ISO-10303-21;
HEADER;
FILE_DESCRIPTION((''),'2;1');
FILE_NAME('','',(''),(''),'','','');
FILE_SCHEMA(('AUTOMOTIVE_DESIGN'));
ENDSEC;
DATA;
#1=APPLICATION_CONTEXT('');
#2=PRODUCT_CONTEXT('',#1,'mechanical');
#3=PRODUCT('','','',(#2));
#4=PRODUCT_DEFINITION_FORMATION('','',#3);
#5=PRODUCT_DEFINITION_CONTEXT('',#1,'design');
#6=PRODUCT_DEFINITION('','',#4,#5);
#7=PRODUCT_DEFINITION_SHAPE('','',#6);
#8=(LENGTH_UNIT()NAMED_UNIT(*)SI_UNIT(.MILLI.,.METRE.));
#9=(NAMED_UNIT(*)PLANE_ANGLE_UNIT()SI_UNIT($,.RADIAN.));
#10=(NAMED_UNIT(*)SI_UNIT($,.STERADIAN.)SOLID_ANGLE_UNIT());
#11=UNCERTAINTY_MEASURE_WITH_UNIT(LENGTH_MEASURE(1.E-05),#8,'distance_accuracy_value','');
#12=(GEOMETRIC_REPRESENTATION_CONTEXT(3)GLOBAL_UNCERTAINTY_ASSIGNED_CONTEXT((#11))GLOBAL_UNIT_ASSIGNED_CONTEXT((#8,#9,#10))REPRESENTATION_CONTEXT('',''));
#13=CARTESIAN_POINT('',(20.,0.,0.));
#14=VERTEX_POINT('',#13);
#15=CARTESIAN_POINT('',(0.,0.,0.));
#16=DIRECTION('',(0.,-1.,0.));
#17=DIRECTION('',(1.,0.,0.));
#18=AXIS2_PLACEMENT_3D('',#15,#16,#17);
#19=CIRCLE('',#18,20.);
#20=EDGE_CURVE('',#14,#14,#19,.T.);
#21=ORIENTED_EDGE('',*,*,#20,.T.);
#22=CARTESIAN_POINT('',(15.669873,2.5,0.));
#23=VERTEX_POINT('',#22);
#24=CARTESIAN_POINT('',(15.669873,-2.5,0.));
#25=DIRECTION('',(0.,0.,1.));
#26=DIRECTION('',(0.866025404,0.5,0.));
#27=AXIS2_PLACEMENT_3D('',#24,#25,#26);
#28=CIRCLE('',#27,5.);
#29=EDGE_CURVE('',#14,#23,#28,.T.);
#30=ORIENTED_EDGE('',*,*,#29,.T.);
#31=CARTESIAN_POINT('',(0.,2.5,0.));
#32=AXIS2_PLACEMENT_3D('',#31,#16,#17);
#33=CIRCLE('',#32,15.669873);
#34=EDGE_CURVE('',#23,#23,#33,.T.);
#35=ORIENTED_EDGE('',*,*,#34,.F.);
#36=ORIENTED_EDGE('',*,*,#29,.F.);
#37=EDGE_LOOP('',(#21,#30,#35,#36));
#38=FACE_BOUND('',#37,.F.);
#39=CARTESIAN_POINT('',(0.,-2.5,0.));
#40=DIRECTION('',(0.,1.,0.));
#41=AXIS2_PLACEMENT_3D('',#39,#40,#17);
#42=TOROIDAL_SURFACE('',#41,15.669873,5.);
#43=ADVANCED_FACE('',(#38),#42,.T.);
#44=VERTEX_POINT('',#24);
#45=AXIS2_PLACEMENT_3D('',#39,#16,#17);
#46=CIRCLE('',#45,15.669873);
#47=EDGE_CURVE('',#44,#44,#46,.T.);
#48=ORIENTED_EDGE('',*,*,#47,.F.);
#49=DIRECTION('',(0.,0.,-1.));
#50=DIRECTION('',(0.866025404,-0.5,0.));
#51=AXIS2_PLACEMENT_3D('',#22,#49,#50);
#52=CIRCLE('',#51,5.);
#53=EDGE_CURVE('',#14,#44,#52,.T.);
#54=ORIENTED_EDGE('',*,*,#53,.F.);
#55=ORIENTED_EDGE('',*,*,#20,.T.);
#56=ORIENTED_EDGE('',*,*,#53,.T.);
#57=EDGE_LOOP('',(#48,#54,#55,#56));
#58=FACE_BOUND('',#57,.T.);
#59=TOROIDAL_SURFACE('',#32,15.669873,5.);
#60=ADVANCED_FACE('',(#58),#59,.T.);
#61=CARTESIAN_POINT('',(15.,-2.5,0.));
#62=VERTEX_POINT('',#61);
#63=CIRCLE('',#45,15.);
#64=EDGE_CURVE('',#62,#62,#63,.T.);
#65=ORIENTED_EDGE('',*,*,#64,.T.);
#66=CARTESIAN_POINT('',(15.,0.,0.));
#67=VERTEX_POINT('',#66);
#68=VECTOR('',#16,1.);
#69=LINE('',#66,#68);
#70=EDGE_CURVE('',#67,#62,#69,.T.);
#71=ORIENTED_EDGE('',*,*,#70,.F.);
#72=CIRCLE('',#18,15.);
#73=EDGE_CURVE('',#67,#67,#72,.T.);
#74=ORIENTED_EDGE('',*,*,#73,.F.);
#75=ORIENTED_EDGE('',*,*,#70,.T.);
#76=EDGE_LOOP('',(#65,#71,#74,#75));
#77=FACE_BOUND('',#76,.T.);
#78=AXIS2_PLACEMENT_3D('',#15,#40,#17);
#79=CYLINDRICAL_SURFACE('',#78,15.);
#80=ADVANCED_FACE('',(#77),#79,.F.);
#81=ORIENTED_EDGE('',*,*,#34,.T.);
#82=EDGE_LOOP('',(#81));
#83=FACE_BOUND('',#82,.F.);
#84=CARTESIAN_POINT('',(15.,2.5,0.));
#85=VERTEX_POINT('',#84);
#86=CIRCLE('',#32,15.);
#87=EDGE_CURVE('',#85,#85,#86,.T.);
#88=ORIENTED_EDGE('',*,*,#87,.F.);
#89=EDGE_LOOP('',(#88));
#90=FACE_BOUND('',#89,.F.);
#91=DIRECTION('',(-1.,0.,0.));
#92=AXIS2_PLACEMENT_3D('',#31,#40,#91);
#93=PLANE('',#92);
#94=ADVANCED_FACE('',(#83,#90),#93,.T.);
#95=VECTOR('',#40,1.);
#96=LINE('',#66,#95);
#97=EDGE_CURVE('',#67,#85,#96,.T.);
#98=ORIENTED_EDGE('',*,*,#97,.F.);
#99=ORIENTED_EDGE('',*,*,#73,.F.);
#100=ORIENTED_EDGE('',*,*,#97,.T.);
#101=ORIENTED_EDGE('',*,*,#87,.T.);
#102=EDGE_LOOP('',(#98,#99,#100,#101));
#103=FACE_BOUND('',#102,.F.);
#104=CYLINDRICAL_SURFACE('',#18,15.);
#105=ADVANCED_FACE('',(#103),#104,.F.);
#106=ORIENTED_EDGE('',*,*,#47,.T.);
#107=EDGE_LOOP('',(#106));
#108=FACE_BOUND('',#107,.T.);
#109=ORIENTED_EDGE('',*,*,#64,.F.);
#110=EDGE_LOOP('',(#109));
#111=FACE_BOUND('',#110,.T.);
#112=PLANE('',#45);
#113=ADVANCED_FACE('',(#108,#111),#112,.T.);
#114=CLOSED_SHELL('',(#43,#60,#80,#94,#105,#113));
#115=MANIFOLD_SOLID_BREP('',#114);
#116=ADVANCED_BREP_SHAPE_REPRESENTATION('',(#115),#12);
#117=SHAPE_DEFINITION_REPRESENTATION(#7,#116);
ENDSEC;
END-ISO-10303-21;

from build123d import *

# Parameters (mm, degrees)
F0_R     = 20
F0_R_2   = 15
F1_DEPTH = 2.5


# Not quite as in the source:
# - a fillet or chamfer that OpenCascade refuses, or shapes differently, is made with other operations: its cross-section is extruded or revolved along the edge and cut away or added


with BuildPart() as f1:
    # F0 (on Front) → F1 (new body)
    with BuildSketch(Plane.XZ):
        Circle(F0_R)
        Circle(F0_R_2, mode=Mode.SUBTRACT)
    extrude(amount=F1_DEPTH)

    # F2: fillet of radius 5 on 1 edges, made by hand

    # F2_s1 → F2_t2 (revolve, cut)
    with BuildSketch(Plane.XY):
        with BuildLine():
            ThreePointArc((20, 0), (18.1698729811, -1.8301270189), (15.6698729811, -2.5))
            Line((15.6698729811, -2.5), (20, -2.5))
            Line((20, -2.5), (20, 0))
        make_face()
    revolve(axis=Axis((0, -2.5, 0), (0, -1, 0)), mode=Mode.SUBTRACT)

    # F3: F1 across plane


with BuildPart() as f1_1:
    add(f1.part)
    add(f1.part.mirror(Plane.XZ))


solid = f1_1.part
